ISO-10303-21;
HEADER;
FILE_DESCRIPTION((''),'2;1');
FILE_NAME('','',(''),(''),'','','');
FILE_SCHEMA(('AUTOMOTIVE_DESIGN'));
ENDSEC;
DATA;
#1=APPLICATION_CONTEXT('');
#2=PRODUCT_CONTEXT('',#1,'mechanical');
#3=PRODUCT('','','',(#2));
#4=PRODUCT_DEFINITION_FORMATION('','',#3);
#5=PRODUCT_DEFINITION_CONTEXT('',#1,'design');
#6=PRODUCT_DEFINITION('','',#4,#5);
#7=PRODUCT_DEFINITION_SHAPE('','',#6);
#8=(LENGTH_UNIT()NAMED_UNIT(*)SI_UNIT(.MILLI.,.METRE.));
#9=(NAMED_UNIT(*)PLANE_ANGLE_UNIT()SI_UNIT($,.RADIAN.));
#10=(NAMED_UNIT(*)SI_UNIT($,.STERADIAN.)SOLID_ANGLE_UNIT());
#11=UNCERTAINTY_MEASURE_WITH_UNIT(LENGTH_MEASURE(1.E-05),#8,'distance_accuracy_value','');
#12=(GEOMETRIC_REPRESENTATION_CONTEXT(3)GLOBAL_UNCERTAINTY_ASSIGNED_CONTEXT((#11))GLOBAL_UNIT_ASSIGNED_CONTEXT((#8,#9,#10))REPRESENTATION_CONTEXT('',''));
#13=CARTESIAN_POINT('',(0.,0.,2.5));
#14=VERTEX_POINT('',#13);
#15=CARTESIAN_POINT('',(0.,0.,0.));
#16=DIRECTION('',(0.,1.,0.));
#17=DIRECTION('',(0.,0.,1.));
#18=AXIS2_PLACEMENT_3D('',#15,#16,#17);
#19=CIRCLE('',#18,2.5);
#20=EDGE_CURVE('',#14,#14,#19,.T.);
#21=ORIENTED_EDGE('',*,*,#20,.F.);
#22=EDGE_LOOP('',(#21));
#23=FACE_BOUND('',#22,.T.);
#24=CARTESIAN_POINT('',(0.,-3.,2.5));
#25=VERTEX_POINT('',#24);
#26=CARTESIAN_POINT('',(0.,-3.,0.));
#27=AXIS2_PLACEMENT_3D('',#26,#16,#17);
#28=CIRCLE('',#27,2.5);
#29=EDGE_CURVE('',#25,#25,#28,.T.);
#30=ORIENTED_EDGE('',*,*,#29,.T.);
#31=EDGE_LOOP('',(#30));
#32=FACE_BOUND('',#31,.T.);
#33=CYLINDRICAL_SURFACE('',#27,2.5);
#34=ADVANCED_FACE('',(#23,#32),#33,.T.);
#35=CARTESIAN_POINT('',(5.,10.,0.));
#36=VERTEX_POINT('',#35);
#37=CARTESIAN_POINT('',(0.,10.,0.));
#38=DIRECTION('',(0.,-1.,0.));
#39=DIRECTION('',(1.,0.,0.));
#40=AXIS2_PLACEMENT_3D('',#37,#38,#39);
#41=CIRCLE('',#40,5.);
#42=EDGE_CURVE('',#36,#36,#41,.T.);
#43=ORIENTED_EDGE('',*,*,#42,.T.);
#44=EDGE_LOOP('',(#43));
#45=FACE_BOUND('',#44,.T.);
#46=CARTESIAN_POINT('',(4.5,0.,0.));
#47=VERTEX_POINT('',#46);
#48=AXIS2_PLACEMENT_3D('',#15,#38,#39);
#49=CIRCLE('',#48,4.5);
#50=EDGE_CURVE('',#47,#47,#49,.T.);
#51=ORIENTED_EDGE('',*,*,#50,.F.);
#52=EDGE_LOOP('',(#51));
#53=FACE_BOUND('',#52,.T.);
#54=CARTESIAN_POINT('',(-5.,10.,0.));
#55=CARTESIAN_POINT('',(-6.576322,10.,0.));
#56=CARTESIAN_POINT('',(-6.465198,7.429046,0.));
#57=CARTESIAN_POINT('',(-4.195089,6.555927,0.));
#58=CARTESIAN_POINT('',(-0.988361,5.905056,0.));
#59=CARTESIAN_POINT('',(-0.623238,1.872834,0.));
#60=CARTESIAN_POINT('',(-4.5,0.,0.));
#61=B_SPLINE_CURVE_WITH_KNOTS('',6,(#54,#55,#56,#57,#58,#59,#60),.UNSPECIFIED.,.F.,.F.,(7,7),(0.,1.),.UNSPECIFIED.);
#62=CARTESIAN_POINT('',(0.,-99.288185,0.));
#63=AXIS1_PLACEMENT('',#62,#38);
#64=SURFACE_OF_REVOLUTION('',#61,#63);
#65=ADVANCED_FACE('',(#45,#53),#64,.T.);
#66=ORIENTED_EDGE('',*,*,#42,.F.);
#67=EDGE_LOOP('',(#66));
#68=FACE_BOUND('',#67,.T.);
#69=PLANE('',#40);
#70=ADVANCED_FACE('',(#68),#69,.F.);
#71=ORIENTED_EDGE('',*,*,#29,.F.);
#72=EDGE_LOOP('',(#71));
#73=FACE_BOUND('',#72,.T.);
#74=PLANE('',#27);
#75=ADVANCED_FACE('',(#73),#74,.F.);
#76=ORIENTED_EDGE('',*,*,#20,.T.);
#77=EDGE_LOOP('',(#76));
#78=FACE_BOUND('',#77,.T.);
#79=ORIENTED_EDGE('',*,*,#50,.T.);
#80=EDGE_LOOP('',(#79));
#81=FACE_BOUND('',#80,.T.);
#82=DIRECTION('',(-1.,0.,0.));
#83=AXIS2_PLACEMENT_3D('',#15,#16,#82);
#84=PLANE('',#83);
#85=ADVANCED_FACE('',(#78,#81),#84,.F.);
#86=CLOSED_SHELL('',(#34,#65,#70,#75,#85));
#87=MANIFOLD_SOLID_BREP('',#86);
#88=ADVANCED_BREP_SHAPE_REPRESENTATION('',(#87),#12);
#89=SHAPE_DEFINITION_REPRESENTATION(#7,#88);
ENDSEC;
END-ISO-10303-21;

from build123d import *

# Parameters (mm, degrees)
ESBO_O2_R                = 2.5
RESSALTO_EXTRUS_O1_DEPTH = 3


# Read off the part's stored shape, not the designer's step: Revolução1
with BuildPart() as part:
    # Revolução1 outline → Revolução1 (revolve)
    with BuildSketch(Plane.XY):
        with BuildLine():
            Line((0, 10), (0, 0))
            Line((0, 0), (4.5, 0))
            add(Edge.make_bspline(
                [(4.5, 0), (0.623238461, 1.872834273), (0.988360922, 5.90505624), (4.195088629, 6.555926715), (6.465197847, 7.429045645), (6.576322074, 10), (5, 10)],
                knots=[0.434933168, 0.434933168, 0.434933168, 0.434933168, 0.434933168, 0.434933168, 0.434933168, 1.434933168, 1.434933168, 1.434933168, 1.434933168, 1.434933168, 1.434933168, 1.434933168], degree=6))
            Line((5, 10), (0, 10))
        make_face()
    revolve(axis=Axis((0, 0, 0), (0, 1, 0)))

    # Esboço2 → Ressalto-extrusão1 (add)
    with BuildSketch(Plane(origin=(0, 0, 0), x_dir=(1, 0, 0), z_dir=(0, 1, 0))):
        with Locations(Location((0, 0, 0), (0, 0, 270))):
            Circle(ESBO_O2_R)
    extrude(amount=-RESSALTO_EXTRUS_O1_DEPTH)


solid = part.part
